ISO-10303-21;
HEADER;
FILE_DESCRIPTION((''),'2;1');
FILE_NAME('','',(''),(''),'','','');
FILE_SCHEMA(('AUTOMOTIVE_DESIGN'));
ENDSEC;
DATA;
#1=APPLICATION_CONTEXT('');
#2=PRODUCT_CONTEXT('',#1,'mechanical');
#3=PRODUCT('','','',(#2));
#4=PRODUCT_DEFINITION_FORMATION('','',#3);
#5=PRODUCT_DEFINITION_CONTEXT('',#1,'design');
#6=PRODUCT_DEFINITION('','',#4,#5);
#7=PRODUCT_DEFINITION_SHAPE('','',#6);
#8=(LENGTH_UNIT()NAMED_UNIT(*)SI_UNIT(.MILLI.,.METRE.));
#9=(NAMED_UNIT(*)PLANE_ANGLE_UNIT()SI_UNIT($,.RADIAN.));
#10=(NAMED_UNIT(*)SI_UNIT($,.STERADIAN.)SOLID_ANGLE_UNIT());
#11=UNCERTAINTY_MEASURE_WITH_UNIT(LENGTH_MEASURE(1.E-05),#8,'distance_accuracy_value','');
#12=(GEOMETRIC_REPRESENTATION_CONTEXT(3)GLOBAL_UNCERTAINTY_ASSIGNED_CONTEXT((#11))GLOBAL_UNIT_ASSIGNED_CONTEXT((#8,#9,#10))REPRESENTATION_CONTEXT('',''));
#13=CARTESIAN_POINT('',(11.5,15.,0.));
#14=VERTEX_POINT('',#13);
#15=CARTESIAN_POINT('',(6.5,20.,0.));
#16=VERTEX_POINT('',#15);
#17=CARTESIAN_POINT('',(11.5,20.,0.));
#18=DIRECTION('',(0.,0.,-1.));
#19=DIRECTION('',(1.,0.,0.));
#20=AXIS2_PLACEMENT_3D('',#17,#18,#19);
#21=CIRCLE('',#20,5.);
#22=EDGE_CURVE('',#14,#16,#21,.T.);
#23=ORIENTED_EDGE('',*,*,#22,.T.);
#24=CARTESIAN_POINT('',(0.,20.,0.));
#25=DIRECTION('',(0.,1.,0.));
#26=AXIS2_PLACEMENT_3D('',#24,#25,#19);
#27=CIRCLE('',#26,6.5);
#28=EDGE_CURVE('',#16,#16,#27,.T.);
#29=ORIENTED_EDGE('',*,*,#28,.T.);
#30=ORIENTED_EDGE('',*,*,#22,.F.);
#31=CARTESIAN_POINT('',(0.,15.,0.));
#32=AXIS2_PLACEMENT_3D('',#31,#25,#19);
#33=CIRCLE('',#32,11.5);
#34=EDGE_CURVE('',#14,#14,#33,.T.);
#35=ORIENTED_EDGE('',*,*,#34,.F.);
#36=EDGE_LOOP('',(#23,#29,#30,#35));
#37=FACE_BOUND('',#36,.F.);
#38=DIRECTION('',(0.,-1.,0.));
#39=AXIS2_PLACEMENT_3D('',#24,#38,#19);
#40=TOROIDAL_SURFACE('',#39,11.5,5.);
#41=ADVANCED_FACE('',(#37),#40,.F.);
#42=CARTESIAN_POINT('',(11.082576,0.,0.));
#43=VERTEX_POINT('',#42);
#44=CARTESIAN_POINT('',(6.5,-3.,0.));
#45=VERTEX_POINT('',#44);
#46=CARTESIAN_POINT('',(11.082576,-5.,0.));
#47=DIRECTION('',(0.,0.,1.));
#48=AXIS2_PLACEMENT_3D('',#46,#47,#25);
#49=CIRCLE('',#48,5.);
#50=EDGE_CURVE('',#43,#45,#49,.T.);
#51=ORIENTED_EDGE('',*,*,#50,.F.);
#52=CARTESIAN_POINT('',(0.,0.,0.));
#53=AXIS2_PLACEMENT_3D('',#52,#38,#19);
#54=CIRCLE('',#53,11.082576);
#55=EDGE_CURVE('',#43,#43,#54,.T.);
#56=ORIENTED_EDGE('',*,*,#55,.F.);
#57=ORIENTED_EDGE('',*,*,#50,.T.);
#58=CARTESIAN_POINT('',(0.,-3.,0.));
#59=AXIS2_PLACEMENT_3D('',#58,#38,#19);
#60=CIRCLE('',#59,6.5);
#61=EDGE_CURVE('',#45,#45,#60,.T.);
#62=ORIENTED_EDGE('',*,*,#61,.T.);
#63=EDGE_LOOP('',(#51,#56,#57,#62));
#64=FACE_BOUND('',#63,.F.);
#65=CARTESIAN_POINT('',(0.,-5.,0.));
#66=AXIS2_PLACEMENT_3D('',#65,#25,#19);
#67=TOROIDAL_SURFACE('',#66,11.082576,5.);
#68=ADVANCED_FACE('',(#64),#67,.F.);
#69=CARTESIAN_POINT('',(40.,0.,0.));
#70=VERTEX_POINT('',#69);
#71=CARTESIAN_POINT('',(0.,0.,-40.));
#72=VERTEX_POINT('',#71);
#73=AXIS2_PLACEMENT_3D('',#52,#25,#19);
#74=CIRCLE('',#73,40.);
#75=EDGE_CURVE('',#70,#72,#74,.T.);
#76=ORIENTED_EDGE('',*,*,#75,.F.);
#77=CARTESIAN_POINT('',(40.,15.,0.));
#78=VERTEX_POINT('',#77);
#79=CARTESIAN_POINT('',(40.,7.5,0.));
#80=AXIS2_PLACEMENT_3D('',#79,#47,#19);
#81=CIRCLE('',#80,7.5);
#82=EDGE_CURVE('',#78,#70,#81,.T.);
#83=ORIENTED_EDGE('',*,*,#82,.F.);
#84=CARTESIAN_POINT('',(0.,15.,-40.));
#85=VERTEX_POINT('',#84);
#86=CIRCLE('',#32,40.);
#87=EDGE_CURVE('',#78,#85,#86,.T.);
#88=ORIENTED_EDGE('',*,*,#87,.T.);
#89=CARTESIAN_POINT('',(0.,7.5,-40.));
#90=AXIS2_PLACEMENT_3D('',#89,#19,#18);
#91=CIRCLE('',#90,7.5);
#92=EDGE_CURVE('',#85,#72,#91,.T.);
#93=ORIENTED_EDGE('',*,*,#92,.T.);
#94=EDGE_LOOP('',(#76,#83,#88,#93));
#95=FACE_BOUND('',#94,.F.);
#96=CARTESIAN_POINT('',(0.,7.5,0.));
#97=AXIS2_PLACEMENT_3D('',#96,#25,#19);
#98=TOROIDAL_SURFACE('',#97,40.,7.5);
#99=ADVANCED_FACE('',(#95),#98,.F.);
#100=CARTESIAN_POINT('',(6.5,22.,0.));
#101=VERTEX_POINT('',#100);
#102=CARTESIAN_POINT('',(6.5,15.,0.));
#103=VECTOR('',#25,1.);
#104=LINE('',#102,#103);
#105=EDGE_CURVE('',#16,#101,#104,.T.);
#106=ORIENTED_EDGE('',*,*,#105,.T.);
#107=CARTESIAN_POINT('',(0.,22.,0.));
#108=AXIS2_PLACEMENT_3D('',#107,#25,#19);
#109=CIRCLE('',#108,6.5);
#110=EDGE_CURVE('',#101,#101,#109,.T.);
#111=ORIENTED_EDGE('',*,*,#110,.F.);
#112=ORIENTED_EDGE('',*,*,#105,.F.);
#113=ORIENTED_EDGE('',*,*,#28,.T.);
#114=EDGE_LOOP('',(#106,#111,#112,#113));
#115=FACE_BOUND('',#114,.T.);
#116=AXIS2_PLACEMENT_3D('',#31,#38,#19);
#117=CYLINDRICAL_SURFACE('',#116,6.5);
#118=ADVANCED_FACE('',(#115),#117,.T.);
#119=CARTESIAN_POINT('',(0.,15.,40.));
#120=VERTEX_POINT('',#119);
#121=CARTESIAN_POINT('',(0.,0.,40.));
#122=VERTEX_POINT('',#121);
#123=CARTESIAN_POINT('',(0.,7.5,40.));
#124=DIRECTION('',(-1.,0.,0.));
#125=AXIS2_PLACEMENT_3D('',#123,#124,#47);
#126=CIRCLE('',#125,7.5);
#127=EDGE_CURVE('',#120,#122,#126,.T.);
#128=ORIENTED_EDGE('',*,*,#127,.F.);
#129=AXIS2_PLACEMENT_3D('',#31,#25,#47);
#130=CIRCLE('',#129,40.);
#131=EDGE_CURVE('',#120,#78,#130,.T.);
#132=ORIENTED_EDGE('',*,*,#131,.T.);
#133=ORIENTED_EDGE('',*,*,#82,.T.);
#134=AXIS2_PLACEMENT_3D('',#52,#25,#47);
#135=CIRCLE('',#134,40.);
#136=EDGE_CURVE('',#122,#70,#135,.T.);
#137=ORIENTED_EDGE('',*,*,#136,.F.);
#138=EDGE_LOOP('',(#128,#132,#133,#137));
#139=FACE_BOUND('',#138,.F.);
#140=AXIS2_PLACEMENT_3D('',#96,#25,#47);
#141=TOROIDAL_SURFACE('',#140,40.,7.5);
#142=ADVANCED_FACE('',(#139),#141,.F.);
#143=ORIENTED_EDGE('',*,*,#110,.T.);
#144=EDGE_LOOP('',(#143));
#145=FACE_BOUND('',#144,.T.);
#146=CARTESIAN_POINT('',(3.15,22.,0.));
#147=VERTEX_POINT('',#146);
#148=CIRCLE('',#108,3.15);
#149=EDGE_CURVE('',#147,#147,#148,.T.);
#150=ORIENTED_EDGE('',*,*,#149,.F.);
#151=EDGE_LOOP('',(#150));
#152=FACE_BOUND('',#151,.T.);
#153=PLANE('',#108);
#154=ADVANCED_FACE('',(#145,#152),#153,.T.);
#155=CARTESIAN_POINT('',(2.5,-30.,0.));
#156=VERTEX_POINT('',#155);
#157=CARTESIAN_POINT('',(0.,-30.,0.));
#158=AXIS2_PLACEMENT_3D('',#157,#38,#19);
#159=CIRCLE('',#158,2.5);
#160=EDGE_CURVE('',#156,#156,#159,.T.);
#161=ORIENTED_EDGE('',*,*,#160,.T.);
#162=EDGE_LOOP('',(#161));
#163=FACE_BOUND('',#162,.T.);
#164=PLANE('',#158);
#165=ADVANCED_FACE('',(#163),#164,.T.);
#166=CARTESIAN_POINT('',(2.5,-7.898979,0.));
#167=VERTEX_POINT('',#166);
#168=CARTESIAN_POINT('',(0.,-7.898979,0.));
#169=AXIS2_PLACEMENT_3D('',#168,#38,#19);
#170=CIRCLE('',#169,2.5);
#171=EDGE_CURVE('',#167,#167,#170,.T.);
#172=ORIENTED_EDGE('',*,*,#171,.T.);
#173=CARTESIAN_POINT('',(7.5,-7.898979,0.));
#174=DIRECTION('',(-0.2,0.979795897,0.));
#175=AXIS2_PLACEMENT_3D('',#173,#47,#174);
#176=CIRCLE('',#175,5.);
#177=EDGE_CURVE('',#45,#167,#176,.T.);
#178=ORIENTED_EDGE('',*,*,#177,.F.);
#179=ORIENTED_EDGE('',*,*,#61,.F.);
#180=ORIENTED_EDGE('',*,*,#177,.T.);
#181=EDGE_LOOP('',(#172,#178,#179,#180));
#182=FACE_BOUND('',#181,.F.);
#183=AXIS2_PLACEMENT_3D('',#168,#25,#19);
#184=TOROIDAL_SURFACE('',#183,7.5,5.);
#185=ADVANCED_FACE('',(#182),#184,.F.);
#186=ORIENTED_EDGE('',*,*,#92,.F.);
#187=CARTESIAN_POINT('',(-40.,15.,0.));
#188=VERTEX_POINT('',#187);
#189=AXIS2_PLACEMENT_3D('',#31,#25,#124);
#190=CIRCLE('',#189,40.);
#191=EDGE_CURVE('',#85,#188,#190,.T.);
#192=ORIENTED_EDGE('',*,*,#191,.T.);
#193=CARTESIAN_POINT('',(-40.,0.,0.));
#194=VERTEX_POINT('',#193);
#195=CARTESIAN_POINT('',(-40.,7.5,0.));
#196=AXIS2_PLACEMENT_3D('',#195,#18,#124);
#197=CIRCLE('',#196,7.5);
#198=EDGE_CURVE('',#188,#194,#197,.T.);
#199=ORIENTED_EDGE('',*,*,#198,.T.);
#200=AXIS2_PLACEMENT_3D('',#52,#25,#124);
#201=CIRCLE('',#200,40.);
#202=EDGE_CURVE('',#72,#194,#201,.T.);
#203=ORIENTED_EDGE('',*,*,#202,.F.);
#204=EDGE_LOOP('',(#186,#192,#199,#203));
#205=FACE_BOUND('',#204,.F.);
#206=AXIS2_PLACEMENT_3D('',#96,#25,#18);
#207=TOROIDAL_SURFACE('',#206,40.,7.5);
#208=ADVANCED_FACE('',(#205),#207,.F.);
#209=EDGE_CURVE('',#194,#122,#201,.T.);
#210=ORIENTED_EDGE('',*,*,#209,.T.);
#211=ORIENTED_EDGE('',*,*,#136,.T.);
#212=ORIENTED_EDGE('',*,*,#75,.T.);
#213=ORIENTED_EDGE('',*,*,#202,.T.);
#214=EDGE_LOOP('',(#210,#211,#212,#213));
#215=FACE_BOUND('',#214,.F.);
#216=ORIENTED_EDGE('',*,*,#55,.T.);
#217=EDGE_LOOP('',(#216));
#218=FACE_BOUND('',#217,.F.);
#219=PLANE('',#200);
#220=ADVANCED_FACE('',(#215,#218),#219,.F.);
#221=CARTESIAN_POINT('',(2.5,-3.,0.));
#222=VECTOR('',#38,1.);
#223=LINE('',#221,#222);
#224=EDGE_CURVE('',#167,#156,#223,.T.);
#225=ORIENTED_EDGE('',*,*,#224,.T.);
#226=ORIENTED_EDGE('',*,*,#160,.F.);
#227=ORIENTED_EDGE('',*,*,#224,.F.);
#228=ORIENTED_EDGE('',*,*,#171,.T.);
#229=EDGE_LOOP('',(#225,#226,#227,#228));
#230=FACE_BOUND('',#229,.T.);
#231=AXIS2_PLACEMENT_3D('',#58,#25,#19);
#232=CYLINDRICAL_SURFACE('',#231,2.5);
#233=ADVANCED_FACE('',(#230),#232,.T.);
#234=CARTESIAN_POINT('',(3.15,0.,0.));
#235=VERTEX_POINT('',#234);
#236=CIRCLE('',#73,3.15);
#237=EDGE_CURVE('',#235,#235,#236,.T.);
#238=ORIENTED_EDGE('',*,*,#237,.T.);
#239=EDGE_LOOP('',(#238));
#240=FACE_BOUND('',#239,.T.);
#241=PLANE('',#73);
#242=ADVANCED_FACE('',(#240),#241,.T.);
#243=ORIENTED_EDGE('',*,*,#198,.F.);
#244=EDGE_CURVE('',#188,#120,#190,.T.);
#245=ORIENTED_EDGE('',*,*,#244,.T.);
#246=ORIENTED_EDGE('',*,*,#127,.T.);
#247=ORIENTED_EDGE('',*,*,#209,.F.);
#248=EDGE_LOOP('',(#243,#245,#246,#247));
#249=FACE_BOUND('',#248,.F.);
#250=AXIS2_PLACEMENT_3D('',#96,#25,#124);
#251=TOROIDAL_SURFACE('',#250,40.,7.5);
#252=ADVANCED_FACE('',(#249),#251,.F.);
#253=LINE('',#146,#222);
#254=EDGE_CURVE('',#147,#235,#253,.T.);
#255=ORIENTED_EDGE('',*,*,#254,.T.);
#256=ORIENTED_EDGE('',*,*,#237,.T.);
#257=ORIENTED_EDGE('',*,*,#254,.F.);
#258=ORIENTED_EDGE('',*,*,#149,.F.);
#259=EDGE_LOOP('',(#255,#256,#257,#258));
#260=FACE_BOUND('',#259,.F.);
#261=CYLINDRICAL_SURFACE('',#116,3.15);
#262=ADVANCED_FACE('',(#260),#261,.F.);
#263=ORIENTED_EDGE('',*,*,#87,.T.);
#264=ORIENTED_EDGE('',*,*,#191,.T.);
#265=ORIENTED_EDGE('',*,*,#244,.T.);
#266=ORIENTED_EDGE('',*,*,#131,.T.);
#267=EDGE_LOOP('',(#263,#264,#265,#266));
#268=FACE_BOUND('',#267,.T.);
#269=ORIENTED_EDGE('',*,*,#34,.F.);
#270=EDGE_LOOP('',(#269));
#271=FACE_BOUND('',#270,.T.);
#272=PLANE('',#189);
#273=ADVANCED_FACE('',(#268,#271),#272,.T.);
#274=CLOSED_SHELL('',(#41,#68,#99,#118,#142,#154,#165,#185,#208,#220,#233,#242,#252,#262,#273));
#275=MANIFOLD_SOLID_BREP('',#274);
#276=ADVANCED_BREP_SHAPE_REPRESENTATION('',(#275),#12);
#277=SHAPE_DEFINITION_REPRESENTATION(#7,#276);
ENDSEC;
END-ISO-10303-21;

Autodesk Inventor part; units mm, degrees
ref_plane "YZ Plane" through (0, 0, 0) normal (1, 0, 0) x (0, 1, 0)
ref_plane "XZ Plane" through (0, 0, 0) normal (0, 1, 0) x (-1, 0, 0)
ref_plane "XY Plane" through (0, 0, 0) normal (0, 0, 1) x (1, 0, 0)
sketch "Sketch1" plane through (0, 0, 0) normal (0, 1, 0) x (-1, 0, 0)
  circle A0 centre (0, 0) radius 40
  dimension "d0" = 80
extrude "Extrusion1" add sketch "Sketch1" along normal blind 15
sketch "Sketch2" plane through (0, 0, 0) normal (1, 0, 0) x (0, 1, 0)
  line L0 (0, 40) -> (15, 40) projected
  line L1 (15, -40) -> (15, 40) projected
  circle A0 centre (7.5, 40) radius 7.5
  point P0 (0, 0)
sketch3d "3D Sketch1"
  arc A0 (-40, 15, 0) -> (0, 15, 40) centre (0, 15, 0) ccw
  arc A1 (0, 15, 40) -> (40, 15, 0) centre (0, 15, 0) ccw
  arc A2 (40, 15, 0) -> (0, 15, -40) centre (0, 15, 0) ccw
  arc A3 (0, 15, -40) -> (-40, 15, 0) centre (0, 15, 0) ccw
sweep "Sweep1" cut profiles "Sketch2" path "3D Sketch1" picked at (7.8013, 37.5182) contours L0 A0
sketch "Sketch3" plane through (0, 15, 0) normal (0, 1, 0) x (1, 0, 0)
  circle A0 centre (0, 0) radius 3.15
  circle A1 centre (0, 0) radius 6.5
  dimension "d5" = 6.3
  dimension "d6" = 13
extrude "Extrusion2" add sketch "Sketch3" along normal blind 7
sketch "Sketch4" plane through (0, 0, 0) normal (0, -1, 0) x (1, 0, 0)
  circle A0 centre (0, 0) radius 3.15 projected
  circle A1 centre (0, 0) radius 6.5
  dimension "d9" = 13
extrude "Extrusion3" add sketch "Sketch4" along normal blind 3 contours A0 | A1
sketch "Sketch5" plane through (0, 15, 0) normal (0, 1, 0) x (1, 0, 0)
  circle A0 centre (0, 0) radius 3.15 projected
  circle A1 centre (0, 0) radius 3.15
  dimension "d12" = 6.3
extrude "Extrusion4" cut sketch "Sketch5" against normal blind 15
sketch "Sketch6" plane through (0, -3, 0) normal (0, -1, 0) x (1, 0, 0)
  circle A0 centre (0, 0) radius 3.15 projected
  circle A1 centre (0, 0) radius 2.5
  dimension "d15" = 5
extrude "Extrusion5" add sketch "Sketch6" along normal blind 27 contours A1
fillet "Fillet1" radius 5 1 edges at (-2.5, -3, 0)
fillet "Fillet2" radius 5 1 edges at (-6.5, 0, 0)
fillet "Fillet3" radius 5 1 edges at (-6.5, 15, 0)
properties part number "pulley"
